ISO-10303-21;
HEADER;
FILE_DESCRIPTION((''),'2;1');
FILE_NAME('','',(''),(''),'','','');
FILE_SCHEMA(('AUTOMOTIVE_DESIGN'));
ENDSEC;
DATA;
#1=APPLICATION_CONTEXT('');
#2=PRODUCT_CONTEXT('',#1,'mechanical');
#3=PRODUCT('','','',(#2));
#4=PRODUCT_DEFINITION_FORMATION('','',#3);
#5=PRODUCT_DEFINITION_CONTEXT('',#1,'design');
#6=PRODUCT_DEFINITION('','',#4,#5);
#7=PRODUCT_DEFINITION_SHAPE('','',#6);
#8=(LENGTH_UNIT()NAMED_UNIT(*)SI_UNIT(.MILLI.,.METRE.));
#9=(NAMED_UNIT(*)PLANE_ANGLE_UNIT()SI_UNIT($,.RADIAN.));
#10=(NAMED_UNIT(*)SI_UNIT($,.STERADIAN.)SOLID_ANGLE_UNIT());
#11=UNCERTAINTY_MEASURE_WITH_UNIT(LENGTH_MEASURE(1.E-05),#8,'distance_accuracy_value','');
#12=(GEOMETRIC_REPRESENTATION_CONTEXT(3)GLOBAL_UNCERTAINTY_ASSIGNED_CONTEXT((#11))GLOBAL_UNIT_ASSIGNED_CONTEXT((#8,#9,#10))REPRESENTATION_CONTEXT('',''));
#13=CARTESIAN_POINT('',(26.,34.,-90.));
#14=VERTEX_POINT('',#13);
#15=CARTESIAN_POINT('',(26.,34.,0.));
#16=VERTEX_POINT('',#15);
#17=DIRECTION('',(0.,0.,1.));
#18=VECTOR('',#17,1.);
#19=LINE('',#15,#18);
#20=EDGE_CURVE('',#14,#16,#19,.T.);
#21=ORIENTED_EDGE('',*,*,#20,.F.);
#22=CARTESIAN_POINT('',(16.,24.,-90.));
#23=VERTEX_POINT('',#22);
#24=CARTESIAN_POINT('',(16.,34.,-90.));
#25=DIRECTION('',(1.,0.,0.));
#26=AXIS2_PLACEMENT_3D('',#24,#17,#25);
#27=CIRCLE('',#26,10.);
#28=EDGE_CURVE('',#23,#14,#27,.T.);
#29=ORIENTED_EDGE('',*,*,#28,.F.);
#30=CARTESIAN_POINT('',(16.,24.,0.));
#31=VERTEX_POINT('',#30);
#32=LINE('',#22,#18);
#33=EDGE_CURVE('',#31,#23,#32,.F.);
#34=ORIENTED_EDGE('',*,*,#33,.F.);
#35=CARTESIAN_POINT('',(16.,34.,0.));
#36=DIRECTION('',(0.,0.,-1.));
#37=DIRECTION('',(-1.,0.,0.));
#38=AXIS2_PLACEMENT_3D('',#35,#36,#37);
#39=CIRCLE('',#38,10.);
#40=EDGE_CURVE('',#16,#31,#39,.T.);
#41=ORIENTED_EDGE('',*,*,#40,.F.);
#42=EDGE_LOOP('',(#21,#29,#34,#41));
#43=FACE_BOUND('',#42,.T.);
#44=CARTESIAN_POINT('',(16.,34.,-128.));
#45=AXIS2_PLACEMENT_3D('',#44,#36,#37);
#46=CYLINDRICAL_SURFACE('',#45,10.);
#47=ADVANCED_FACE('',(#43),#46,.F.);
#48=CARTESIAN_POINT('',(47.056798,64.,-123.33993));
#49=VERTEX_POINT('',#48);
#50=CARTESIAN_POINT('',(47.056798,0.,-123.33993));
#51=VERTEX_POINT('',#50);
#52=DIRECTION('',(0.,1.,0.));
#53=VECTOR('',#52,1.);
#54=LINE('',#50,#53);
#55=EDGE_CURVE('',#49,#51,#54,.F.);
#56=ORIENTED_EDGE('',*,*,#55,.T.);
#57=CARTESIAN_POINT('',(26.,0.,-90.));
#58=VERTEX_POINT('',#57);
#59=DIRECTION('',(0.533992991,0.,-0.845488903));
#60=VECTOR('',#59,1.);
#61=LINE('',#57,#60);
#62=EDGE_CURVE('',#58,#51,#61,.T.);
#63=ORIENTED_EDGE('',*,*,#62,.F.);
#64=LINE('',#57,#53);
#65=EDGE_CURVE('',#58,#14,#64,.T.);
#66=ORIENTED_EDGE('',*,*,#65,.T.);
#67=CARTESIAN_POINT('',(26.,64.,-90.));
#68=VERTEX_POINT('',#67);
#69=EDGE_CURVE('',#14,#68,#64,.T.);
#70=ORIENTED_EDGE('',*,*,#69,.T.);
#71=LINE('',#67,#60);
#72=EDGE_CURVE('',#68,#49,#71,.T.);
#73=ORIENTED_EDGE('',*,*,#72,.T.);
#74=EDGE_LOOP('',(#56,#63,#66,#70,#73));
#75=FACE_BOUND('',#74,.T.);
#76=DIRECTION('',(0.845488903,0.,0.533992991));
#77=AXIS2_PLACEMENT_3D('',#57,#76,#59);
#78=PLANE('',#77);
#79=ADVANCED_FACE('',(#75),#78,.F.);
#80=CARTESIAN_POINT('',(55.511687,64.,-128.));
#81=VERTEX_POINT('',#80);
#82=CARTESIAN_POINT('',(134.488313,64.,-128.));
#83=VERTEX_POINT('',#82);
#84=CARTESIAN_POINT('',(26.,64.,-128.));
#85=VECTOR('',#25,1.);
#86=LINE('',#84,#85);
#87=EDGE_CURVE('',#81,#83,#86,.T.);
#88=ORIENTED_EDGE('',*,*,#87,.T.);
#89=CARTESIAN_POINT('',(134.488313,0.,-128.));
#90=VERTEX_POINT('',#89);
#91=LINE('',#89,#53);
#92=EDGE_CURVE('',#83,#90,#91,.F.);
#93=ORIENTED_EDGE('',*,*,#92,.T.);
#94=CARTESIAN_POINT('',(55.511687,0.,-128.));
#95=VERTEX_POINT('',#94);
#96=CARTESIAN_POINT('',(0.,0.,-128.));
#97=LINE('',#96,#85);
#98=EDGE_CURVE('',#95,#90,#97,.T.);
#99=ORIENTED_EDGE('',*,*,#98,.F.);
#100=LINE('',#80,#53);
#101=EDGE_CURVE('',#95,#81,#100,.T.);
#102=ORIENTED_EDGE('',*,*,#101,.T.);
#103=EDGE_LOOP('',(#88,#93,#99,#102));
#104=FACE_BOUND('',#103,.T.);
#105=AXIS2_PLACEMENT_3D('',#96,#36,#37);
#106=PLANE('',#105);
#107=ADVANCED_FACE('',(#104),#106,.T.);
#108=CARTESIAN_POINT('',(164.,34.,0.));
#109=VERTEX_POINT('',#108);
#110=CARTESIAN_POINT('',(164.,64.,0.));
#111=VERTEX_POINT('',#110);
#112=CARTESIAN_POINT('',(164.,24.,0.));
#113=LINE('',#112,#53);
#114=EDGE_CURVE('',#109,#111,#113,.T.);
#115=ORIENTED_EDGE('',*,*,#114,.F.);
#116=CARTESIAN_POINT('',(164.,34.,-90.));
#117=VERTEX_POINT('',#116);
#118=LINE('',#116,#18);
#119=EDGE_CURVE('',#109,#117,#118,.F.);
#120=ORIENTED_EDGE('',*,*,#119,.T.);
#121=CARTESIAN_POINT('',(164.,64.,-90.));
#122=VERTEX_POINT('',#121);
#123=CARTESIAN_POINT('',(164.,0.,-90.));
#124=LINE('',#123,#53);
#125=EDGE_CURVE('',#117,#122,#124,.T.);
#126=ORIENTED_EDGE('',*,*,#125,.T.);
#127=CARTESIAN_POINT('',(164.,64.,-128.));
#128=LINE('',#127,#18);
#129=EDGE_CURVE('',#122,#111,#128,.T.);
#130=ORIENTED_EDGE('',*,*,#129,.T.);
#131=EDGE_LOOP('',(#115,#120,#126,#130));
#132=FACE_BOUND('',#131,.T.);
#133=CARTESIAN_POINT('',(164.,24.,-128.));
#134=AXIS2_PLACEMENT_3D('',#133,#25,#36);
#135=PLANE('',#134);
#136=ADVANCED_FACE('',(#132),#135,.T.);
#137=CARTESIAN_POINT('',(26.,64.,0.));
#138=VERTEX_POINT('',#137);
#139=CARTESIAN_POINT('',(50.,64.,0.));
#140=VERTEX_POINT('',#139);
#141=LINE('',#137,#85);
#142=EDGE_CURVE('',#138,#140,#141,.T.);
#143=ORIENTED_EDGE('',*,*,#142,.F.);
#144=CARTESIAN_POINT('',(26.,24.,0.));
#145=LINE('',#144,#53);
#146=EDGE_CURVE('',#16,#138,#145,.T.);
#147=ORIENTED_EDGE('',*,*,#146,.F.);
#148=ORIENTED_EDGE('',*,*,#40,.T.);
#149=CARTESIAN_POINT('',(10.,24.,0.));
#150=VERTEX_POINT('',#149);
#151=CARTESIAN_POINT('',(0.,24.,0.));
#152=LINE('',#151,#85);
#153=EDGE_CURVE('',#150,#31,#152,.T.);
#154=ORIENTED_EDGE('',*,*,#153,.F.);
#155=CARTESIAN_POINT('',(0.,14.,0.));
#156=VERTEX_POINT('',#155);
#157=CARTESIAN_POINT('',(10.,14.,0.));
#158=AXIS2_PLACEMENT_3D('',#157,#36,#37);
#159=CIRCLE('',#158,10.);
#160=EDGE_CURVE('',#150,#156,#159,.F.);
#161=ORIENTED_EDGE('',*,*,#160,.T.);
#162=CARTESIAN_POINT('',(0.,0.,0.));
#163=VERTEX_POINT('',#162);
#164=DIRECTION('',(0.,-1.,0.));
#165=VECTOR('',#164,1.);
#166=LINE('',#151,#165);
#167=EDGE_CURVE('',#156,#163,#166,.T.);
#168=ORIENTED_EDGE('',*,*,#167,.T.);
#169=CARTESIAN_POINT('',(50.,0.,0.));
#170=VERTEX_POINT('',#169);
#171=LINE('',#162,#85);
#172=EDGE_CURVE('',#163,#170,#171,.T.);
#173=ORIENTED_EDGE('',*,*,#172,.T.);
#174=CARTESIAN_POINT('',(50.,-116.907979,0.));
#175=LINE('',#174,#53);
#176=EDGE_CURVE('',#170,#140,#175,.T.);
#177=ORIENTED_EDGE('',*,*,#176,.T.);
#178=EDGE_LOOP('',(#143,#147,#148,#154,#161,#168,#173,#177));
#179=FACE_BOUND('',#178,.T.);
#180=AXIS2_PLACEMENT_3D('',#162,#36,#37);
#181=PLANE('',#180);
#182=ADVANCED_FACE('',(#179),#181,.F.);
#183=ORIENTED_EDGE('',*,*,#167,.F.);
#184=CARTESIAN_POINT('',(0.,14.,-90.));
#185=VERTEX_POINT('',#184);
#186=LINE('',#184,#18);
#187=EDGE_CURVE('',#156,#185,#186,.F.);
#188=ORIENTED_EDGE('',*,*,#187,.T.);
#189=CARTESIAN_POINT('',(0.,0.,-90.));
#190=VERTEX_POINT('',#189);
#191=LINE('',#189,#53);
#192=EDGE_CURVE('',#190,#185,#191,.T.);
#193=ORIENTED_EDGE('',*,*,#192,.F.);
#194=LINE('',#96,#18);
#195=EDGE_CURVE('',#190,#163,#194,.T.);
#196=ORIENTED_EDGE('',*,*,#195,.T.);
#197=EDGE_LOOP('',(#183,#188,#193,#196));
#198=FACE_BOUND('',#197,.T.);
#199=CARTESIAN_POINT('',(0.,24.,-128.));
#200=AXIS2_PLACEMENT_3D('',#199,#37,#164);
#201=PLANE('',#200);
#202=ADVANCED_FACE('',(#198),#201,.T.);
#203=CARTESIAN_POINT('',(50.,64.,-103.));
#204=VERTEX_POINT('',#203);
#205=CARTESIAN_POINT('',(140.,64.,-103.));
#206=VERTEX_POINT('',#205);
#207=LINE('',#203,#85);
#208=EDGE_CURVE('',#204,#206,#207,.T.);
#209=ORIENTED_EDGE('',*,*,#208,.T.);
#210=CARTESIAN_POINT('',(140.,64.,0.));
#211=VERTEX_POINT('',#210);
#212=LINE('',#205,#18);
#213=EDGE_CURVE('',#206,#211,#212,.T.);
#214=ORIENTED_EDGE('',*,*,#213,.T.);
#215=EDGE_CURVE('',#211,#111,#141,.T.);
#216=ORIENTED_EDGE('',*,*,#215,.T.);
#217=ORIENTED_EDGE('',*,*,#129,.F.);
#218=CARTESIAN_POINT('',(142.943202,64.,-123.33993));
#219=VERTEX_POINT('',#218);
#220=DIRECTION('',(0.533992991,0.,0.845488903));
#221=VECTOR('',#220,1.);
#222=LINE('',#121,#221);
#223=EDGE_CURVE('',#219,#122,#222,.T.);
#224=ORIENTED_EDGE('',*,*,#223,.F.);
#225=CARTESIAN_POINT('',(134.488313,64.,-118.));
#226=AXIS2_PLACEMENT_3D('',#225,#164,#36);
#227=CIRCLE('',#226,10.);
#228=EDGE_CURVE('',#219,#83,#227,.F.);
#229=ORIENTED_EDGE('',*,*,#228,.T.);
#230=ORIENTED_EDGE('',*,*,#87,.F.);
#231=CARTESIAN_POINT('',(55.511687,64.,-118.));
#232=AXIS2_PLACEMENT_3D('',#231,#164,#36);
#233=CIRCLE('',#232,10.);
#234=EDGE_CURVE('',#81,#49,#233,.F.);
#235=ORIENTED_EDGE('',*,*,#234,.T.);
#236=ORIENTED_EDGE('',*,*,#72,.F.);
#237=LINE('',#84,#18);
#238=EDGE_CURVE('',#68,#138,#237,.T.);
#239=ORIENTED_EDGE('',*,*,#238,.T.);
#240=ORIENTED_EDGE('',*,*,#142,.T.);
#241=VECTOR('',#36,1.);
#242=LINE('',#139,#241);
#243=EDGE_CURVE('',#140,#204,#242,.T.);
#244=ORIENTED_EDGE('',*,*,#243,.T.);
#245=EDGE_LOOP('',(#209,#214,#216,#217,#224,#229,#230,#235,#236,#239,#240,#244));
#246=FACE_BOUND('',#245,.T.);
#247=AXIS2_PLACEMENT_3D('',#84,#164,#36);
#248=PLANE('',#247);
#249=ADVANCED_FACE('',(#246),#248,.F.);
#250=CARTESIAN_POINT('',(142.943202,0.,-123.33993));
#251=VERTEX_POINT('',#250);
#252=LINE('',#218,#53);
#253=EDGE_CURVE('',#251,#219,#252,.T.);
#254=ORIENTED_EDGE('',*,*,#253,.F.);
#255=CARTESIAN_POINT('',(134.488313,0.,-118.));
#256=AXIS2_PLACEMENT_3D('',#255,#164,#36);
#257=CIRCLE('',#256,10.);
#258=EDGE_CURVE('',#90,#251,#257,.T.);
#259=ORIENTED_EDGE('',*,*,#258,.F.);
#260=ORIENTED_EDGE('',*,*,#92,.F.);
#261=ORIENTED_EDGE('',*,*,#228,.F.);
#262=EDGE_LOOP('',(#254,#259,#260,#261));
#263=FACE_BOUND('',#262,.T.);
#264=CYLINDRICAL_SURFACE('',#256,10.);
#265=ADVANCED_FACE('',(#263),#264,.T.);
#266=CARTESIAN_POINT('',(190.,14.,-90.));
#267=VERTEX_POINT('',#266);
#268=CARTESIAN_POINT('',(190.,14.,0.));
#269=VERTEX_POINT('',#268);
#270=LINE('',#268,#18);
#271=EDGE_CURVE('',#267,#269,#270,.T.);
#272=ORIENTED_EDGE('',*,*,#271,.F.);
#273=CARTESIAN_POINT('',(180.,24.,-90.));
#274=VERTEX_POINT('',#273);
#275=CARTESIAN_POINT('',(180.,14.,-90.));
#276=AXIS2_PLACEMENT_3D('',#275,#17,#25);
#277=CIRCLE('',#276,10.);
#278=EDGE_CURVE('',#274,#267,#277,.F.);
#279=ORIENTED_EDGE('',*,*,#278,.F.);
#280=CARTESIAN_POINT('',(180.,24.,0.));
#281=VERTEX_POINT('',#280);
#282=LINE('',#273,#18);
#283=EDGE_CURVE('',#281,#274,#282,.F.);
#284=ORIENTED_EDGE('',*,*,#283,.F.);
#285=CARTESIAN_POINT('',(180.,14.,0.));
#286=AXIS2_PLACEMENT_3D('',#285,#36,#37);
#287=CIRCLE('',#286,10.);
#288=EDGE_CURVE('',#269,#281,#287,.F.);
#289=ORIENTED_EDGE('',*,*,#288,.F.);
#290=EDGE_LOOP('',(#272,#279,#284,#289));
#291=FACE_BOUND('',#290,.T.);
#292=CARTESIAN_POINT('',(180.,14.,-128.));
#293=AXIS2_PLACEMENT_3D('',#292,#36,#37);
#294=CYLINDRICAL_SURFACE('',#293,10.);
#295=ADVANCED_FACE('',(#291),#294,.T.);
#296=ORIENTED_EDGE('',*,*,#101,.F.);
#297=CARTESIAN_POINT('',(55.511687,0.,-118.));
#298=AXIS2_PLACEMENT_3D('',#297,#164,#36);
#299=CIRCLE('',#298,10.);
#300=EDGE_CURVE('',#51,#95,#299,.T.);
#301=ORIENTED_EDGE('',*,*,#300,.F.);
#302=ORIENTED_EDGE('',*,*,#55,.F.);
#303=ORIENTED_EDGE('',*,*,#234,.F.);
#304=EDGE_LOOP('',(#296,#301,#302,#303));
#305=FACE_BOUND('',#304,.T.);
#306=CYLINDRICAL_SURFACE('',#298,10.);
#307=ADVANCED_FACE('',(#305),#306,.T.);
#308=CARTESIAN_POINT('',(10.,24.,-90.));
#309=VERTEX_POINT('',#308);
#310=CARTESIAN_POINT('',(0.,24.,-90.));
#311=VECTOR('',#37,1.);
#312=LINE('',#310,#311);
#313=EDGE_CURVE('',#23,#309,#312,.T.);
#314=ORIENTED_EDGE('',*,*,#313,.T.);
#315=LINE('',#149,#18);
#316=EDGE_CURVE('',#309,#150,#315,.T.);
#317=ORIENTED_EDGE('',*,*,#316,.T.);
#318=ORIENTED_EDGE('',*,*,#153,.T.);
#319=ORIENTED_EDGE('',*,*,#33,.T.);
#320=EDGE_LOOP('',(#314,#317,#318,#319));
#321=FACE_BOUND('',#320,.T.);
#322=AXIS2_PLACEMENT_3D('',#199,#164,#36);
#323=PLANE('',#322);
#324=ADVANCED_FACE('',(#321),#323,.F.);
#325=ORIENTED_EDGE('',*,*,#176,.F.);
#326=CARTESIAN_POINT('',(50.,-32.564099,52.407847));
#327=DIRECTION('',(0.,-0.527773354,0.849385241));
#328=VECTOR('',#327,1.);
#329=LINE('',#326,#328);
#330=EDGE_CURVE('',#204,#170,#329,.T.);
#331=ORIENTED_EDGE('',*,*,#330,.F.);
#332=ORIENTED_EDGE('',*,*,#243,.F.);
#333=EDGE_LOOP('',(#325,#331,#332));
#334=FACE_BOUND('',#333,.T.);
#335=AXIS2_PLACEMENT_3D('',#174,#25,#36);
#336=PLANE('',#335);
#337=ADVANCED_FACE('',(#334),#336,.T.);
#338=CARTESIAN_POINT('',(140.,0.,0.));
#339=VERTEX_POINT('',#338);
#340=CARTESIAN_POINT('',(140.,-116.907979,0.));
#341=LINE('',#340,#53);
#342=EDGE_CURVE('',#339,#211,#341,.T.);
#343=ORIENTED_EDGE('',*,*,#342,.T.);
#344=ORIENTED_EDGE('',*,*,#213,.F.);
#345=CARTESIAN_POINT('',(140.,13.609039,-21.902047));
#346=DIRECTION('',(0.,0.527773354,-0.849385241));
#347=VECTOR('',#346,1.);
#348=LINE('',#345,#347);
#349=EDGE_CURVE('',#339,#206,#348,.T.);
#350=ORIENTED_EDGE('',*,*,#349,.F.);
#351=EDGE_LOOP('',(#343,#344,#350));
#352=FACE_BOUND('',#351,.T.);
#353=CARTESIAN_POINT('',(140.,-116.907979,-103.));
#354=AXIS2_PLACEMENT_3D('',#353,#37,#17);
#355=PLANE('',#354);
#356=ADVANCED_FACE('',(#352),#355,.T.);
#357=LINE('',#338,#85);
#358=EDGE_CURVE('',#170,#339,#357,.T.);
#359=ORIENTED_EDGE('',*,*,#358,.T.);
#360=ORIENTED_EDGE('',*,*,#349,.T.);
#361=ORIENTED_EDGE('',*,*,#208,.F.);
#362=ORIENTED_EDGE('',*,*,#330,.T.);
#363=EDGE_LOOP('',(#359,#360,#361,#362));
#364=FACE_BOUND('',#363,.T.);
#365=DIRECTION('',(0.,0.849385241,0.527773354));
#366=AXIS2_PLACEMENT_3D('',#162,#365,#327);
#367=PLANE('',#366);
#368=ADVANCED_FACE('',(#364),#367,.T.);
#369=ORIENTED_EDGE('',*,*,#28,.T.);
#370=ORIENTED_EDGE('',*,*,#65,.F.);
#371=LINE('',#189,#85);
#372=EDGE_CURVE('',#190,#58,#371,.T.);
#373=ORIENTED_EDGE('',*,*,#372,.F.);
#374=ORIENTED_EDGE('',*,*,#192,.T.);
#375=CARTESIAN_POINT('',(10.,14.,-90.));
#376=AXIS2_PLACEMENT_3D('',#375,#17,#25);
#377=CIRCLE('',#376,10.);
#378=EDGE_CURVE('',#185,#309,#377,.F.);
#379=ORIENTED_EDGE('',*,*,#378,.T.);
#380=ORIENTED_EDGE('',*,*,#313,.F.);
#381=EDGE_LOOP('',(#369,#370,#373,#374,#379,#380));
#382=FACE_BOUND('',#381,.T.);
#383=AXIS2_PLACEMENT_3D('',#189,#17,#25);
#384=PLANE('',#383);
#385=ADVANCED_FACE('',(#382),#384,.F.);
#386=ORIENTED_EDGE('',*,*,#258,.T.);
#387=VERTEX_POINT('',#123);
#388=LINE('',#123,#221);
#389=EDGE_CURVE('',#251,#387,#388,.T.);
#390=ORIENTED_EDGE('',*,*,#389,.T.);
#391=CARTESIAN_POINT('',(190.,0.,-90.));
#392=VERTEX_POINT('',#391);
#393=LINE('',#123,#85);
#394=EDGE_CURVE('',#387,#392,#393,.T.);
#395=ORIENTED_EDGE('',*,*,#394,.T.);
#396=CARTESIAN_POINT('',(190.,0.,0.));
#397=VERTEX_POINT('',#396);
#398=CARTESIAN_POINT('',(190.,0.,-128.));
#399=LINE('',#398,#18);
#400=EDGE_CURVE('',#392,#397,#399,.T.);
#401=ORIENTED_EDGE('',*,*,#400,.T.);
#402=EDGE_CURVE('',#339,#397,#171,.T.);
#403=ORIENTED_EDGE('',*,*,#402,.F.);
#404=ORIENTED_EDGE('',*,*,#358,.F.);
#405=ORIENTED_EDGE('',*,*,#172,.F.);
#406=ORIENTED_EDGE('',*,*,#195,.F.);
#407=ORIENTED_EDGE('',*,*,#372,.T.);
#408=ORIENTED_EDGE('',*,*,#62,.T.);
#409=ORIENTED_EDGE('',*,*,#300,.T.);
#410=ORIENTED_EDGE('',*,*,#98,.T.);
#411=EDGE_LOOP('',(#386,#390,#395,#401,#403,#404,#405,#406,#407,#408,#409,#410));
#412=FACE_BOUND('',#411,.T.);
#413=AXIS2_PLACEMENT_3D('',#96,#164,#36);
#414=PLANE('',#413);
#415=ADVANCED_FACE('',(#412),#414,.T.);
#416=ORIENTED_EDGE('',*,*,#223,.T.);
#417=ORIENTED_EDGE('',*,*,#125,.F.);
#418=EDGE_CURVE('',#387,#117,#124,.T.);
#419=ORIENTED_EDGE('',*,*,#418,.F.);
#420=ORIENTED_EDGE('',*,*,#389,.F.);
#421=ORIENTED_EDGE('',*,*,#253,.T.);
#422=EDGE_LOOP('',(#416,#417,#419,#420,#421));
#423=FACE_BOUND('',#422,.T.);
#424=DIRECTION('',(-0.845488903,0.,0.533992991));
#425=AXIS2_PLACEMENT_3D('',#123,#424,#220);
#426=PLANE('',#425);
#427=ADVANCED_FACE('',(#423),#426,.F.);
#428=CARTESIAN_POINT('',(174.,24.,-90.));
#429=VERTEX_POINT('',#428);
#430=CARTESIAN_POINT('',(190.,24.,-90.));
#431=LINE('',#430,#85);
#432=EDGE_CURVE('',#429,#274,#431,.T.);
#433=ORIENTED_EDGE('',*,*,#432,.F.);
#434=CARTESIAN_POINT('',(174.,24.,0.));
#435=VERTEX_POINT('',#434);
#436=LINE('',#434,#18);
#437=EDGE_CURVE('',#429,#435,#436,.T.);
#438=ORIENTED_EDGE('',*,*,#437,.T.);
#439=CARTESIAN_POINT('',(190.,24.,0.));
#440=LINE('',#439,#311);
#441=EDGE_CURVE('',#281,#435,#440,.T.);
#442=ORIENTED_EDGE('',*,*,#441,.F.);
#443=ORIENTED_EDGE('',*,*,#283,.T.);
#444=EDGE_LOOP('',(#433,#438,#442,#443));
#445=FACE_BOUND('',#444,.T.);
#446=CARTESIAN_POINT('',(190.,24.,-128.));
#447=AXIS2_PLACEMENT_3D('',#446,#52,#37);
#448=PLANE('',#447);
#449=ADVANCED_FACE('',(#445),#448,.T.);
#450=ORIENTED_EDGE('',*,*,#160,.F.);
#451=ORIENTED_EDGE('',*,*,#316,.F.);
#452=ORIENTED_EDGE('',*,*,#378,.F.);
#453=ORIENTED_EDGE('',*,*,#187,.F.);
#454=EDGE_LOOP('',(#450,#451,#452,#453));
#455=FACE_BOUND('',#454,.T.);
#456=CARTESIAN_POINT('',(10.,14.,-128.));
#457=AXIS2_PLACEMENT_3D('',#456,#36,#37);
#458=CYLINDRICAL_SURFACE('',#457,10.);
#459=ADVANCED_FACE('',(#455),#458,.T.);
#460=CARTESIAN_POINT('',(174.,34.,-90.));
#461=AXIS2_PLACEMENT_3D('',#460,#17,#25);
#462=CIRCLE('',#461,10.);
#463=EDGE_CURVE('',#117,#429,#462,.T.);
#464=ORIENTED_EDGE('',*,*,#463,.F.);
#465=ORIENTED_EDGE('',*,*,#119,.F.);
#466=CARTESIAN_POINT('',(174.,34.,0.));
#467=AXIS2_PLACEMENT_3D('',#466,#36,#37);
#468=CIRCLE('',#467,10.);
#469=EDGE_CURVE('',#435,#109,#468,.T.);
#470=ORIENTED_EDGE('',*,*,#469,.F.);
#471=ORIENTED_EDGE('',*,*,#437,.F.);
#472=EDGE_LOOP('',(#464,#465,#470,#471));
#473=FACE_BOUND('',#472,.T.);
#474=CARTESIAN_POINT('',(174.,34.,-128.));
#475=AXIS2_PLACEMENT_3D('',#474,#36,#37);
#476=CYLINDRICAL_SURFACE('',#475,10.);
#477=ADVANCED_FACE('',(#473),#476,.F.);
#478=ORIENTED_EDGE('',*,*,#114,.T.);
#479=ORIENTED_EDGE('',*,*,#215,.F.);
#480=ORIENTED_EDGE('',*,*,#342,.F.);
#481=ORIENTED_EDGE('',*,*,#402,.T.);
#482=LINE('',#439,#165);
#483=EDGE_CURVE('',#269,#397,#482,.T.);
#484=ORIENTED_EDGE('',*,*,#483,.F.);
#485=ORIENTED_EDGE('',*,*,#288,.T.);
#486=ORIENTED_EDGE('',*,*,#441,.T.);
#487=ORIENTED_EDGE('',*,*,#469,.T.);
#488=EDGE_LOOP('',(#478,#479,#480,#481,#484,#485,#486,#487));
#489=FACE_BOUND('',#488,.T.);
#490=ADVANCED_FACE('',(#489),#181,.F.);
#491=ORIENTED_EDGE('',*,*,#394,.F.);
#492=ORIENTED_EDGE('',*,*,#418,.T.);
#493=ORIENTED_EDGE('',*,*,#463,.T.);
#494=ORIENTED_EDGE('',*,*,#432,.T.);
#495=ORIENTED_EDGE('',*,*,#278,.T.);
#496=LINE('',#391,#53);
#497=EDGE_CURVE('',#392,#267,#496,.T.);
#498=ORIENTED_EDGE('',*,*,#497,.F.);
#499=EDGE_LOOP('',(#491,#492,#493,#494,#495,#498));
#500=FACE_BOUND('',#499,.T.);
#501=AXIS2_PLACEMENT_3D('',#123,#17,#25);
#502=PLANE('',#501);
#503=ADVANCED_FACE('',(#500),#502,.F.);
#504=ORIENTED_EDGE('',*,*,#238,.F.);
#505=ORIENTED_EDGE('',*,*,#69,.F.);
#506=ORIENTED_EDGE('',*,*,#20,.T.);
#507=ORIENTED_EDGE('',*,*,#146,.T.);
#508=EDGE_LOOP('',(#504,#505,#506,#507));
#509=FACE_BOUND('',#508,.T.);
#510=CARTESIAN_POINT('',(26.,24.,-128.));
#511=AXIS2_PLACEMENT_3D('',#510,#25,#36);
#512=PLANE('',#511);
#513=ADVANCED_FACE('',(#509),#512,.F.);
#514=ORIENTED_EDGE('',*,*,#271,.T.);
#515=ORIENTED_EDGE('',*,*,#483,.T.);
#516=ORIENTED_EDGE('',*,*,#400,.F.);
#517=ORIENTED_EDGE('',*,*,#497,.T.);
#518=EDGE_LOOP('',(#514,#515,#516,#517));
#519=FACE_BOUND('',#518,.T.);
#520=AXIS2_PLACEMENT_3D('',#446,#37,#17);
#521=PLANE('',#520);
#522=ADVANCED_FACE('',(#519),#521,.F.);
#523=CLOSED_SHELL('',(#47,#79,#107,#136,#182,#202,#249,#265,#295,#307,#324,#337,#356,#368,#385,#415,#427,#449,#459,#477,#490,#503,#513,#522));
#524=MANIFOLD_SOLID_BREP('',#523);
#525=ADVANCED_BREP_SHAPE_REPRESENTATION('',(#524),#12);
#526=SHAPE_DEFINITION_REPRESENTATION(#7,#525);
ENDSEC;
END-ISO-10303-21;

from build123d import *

# Parameters (mm, degrees)
BOSS_EXTRUDE1_DEPTH = 128
CUT_EXTRUDE1_DEPTH  = 238.865508218
CUT_EXTRUDE2_START  = 50
CUT_EXTRUDE2_DEPTH  = 90
FILLET1_R           = 10


# Read off the part's stored shape, not the designer's step: Cut-Extrude2
with BuildPart() as part:
    # Sketch1 → Boss-Extrude1 (new body)
    with BuildSketch(Plane.XY):
        Polygon((0, 24), (26, 24), (26, 64), (164, 64), (164, 24), (190, 24), (190, 0), (0, 0), align=None)
    extrude(amount=-BOSS_EXTRUDE1_DEPTH)

    # Sketch5 → Cut-Extrude1 (cut, through all)
    with BuildSketch(Plane(origin=(0, 64, 0), x_dir=(1, 0, 0), z_dir=(0, 1, 0))):
        Polygon((0, 90), (26, 90), (50, 128), (0, 128), align=None)
        Polygon((164, 90), (190, 90), (190, 128), (140, 128), align=None)
    extrude(amount=-CUT_EXTRUDE1_DEPTH, mode=Mode.SUBTRACT)

    # Cut-Extrude2 outline → Cut-Extrude2 (cut)
    with BuildSketch(Plane.YZ.offset(CUT_EXTRUDE2_START)):
        Polygon((0, 0), (64, -103), (64, 0), align=None)
    extrude(amount=CUT_EXTRUDE2_DEPTH, mode=Mode.SUBTRACT)

    # Fillet1
    fillet1_edges = [part.edges().sort_by_distance(p)[0] for p in [
        (26, 24, -45),
        (0, 24, -45),
        (190, 24, -45),
        (164, 24, -45),
        (50, 32, -128),
        (140, 32, -128),
    ]]
    fillet(fillet1_edges, radius=FILLET1_R)


solid = part.part
